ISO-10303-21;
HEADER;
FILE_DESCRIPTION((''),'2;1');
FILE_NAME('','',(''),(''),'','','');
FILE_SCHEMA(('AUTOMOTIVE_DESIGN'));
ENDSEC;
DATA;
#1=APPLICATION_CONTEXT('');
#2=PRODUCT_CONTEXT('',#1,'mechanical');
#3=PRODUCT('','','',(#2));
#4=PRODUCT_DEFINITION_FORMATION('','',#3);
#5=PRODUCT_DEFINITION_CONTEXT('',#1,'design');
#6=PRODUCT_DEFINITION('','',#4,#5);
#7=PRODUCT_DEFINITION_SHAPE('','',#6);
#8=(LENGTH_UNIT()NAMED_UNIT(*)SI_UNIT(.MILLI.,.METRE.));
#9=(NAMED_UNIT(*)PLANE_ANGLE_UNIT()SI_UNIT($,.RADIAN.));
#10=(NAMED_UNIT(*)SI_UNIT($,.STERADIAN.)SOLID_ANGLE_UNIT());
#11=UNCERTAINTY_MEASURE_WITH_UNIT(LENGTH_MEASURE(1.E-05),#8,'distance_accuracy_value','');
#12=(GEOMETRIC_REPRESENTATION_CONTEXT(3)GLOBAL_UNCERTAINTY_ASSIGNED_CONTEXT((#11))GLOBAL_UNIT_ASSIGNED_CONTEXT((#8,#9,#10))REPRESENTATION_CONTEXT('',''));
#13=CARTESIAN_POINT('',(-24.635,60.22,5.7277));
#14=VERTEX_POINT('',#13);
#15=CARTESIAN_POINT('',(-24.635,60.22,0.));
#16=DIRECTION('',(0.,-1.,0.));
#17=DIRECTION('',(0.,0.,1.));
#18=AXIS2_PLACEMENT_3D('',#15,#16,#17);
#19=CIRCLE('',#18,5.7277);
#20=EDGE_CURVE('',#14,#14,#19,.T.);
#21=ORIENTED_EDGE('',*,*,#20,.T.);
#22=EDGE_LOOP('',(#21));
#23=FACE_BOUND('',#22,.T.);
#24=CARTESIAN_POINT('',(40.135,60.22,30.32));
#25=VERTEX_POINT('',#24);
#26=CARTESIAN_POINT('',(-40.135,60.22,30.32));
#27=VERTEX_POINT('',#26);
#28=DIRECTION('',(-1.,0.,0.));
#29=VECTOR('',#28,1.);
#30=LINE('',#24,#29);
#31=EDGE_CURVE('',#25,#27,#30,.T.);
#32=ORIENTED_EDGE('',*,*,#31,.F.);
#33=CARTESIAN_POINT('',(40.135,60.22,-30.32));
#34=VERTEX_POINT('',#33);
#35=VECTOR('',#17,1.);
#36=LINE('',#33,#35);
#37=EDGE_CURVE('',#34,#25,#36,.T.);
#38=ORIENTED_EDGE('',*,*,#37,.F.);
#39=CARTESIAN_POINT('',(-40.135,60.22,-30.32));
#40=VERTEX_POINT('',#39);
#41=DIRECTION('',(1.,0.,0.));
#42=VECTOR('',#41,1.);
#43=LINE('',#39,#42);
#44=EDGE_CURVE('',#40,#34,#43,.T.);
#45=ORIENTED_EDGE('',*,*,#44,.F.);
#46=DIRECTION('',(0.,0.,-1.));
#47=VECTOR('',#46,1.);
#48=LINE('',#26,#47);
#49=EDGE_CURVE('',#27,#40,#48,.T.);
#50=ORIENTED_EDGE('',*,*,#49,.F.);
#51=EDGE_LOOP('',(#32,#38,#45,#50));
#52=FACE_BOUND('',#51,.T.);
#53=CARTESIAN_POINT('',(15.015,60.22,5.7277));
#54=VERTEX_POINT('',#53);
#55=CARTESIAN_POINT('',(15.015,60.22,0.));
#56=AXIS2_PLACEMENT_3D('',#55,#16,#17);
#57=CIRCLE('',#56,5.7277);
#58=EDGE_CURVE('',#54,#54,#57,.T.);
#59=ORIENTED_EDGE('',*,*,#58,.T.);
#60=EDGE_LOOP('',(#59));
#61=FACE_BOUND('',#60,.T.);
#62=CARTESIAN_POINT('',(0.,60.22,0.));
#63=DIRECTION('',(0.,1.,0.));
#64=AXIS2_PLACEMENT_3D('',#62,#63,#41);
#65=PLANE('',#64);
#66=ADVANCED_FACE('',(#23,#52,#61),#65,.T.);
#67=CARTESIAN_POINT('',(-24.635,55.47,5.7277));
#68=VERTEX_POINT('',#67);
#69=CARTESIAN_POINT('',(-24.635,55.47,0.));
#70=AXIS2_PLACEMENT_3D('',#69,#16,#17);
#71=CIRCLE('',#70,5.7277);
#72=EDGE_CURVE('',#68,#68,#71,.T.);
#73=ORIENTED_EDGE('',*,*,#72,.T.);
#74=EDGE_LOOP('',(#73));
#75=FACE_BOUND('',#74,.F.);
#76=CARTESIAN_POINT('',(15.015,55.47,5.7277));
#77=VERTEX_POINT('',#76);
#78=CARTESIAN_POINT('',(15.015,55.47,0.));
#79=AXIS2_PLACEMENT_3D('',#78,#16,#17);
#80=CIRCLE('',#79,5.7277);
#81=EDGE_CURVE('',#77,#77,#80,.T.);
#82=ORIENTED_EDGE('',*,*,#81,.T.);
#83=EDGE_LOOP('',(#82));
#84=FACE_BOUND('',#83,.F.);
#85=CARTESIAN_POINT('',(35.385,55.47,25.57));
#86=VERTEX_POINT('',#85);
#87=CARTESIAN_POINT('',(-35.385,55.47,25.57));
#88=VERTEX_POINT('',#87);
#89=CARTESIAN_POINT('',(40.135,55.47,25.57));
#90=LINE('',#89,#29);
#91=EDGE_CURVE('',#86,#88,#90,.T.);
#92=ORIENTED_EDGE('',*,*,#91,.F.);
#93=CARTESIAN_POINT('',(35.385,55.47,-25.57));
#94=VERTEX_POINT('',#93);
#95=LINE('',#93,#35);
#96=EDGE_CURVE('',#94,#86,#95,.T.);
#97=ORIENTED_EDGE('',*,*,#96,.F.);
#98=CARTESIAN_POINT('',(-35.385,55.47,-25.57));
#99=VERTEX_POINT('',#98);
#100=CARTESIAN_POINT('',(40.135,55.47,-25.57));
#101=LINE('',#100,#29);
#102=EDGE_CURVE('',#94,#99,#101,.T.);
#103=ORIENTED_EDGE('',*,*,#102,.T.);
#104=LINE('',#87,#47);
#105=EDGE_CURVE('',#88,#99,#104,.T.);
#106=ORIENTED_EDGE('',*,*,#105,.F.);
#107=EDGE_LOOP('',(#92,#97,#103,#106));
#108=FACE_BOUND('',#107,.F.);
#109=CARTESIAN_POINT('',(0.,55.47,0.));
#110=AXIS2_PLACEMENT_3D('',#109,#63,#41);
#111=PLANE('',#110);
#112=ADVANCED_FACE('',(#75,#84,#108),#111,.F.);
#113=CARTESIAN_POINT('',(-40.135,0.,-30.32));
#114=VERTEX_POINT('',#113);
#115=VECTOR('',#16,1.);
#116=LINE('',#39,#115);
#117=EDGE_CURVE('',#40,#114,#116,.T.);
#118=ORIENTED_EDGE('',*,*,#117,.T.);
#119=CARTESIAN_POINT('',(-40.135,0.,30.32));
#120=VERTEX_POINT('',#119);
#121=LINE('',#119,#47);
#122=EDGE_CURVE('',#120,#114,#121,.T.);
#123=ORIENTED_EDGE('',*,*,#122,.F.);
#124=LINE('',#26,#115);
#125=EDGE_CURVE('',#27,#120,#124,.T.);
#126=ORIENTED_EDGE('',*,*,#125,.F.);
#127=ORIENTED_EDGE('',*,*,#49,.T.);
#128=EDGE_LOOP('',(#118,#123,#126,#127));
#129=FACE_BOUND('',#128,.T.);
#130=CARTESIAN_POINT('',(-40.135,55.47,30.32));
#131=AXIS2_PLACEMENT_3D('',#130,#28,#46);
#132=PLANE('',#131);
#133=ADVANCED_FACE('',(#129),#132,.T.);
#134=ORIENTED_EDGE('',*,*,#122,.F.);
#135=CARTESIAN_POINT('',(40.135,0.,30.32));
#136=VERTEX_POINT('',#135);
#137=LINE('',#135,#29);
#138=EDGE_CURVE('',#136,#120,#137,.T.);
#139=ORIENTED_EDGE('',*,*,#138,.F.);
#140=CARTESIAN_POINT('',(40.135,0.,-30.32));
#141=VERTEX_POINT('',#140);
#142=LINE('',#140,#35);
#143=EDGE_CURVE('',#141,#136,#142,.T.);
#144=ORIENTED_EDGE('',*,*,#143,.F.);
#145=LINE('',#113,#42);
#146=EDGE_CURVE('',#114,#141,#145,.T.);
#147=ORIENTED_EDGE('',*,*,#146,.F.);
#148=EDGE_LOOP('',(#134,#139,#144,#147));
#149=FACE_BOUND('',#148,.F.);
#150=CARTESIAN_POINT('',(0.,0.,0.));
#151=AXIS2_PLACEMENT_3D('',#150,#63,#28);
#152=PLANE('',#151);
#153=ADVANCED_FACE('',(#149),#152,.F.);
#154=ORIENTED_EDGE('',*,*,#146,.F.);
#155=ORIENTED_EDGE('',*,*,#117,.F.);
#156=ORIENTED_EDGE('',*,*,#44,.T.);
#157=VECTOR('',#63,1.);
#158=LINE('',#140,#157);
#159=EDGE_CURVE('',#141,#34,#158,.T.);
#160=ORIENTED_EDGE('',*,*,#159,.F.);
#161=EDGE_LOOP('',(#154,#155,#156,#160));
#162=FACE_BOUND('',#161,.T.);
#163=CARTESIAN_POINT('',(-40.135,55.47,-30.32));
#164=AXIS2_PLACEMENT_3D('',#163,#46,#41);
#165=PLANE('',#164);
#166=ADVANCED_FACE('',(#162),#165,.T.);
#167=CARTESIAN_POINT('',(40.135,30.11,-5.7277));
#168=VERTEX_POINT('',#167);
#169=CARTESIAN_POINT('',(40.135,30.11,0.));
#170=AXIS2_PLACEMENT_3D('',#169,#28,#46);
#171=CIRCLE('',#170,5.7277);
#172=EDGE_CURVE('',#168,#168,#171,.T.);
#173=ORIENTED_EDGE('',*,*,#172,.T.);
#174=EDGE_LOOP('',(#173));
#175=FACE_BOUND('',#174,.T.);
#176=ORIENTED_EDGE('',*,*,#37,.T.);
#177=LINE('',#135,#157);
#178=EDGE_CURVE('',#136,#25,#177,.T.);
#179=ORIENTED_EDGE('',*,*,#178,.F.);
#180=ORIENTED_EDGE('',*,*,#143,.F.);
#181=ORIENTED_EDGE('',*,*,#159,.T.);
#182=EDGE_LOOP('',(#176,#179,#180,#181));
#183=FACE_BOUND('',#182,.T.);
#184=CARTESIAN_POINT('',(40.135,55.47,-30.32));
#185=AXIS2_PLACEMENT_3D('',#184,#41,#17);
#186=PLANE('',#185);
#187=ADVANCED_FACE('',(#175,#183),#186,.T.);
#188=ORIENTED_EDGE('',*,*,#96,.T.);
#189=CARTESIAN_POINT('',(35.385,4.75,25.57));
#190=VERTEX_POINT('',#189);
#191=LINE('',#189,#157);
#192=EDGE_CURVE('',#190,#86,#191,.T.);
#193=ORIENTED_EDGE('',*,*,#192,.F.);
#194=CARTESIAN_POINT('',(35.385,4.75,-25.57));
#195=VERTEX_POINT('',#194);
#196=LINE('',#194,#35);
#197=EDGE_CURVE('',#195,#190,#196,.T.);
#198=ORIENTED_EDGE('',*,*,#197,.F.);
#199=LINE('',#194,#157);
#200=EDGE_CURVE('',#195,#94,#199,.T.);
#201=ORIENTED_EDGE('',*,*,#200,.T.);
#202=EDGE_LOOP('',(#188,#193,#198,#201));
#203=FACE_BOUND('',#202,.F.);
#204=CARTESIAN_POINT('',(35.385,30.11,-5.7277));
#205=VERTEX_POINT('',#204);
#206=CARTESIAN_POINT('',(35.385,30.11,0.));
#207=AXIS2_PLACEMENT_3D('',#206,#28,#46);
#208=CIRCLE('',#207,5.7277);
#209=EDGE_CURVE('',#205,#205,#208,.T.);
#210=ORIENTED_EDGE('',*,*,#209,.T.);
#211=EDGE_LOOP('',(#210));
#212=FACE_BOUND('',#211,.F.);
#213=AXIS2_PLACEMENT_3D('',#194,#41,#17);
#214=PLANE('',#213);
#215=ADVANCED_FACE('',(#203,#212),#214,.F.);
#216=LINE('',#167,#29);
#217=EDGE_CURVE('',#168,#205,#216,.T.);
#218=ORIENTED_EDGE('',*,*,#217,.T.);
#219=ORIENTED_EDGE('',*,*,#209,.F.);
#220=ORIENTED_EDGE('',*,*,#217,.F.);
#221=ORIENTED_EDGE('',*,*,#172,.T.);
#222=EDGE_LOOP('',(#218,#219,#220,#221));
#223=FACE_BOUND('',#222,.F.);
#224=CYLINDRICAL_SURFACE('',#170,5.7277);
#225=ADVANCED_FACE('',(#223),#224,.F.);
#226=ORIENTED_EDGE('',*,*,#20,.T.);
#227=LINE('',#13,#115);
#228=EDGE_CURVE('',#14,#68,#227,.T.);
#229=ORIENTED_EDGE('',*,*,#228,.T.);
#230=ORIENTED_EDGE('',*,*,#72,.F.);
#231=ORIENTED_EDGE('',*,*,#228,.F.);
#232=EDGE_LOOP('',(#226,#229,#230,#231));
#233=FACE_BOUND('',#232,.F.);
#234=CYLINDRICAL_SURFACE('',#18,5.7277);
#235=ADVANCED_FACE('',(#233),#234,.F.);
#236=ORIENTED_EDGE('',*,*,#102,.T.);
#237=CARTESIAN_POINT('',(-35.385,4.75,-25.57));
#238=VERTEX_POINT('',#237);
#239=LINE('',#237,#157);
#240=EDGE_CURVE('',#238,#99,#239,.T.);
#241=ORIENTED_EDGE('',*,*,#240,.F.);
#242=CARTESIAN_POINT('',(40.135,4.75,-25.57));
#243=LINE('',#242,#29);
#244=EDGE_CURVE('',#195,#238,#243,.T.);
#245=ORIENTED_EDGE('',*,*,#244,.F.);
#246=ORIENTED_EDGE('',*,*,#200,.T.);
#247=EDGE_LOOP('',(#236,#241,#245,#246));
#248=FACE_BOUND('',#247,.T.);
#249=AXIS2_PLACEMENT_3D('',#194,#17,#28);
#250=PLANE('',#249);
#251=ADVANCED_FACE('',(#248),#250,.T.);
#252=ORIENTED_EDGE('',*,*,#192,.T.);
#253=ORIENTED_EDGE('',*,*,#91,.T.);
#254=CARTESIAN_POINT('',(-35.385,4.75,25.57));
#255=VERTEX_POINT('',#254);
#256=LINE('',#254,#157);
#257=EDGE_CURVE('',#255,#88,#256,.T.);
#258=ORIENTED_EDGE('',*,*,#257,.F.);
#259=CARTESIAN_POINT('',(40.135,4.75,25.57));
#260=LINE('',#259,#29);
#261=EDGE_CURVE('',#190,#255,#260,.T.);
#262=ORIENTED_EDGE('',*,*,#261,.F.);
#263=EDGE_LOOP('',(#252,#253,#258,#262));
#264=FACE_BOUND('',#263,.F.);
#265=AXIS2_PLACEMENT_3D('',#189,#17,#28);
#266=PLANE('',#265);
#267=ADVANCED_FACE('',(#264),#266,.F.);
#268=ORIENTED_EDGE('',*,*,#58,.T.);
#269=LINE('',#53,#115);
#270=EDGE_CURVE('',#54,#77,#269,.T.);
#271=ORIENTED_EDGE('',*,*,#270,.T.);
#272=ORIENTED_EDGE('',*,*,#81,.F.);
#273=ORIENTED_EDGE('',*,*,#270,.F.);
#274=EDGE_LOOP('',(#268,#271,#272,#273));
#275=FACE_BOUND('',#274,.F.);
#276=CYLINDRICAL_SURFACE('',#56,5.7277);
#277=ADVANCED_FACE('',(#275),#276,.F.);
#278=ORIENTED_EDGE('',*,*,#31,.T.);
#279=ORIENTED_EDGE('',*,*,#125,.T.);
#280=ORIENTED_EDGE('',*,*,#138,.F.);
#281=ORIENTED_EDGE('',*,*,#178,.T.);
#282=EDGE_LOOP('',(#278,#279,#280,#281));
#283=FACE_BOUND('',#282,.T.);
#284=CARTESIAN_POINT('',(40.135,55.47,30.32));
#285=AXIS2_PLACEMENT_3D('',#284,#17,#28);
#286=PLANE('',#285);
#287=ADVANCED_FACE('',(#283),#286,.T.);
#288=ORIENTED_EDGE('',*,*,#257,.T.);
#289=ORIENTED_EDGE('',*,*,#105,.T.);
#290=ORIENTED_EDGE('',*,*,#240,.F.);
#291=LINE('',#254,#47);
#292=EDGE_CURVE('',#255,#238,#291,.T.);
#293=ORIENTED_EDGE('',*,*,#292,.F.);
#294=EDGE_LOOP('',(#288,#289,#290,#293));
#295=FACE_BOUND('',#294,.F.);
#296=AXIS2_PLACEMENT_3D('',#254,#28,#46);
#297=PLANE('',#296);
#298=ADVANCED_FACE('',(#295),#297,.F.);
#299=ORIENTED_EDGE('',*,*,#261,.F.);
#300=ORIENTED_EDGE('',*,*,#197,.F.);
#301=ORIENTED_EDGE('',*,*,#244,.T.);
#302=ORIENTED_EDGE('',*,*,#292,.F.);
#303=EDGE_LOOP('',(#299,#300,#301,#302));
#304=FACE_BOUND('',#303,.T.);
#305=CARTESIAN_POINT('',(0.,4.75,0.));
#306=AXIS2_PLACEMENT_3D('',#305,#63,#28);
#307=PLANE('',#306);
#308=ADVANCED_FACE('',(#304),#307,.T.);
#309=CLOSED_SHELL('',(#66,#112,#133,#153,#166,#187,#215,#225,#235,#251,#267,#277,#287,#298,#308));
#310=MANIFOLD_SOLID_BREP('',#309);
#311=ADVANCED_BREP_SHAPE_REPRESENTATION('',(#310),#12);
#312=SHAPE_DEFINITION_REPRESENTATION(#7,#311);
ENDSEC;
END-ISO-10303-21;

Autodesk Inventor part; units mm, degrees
ref_plane "YZ Plane" through (0, 0, 0) normal (1, 0, 0) x (0, 1, 0)
ref_plane "XZ Plane" through (0, 0, 0) normal (0, 1, 0) x (-1, 0, 0)
ref_plane "XY Plane" through (0, 0, 0) normal (0, 0, 1) x (1, 0, 0)
sketch "Sketch1" plane through (0, 0, 0) normal (0, 1, 0) x (-1, 0, 0)
  line L0 (-40.135, 30.32) -> (40.135, 30.32)
  line L1 (40.135, 30.32) -> (40.135, -30.32)
  line L2 (40.135, -30.32) -> (-40.135, -30.32)
  line L3 (-40.135, -30.32) -> (-40.135, 30.32)
  line L4 (-40.135, 30.32) -> (40.135, -30.32) construction
  line L5 (40.135, 30.32) -> (-40.135, -30.32) construction
  point P0 (0, 0)
  dimension "d0" = 80.27
  dimension "d1" = 60.64
extrude "Extrusion1" add sketch "Sketch1" along normal blind 4.75
sketch "Sketch2" plane through (0, 4.75, 0) normal (0, 1, 0) x (1, 0, 0)
  line L0 (-40.135, -30.32) -> (40.135, -30.32) projected
  line L1 (40.135, -30.32) -> (40.135, 30.32) projected
  line L2 (-40.135, -30.32) -> (40.135, -30.32)
  line L3 (40.135, -30.32) -> (40.135, -25.57)
  line L4 (40.135, -25.57) -> (-40.135, -25.57)
  line L5 (-40.135, -25.57) -> (-40.135, -30.32)
  line L6 (-40.135, 30.32) -> (40.135, 30.32)
  line L7 (40.135, 30.32) -> (40.135, 25.57)
  line L8 (40.135, 25.57) -> (-40.135, 25.57)
  line L9 (-40.135, 25.57) -> (-40.135, 30.32)
  line L10 (-40.135, -25.57) -> (-35.385, -25.57)
  line L11 (-35.385, -25.57) -> (-35.385, 25.57)
  line L12 (-35.385, 25.57) -> (-40.135, 25.57)
  line L13 (-40.135, 25.57) -> (-40.135, -25.57)
  line L14 (40.135, 25.57) -> (35.385, 25.57)
  line L15 (35.385, 25.57) -> (35.385, -25.57)
  line L16 (35.385, -25.57) -> (40.135, -25.57)
  line L17 (40.135, -25.57) -> (40.135, 25.57)
  point P0 (0, 0)
  dimension "d4" = 4.75
  dimension "d5" = 4.75
  dimension "d6" = 4.75
  dimension "d7" = 4.75
extrude "Extrusion2" add sketch "Sketch2" along normal blind 50.72 contours L5 L4 L1 L0 | L13 L8 L11 L4 | L4 L15 L8 L1 | L9 L6 L1 L8
sketch "Sketch3" plane through (0, 55.47, 0) normal (0, 1, 0) x (1, 0, 0)
  line L0 (40.135, -30.32) -> (-40.135, -30.32) projected
  line L1 (-40.135, -30.32) -> (-40.135, 30.32) projected
  line L2 (-40.135, 30.32) -> (40.135, 30.32) projected
  line L3 (40.135, 30.32) -> (40.135, -30.32) projected
  point P0 (0, 0)
extrude "Extrusion3" add sketch "Sketch3" along normal blind 4.75
sketch "Sketch4" plane through (40.135, 0, 30.32) normal (1, 0, 0) x (0, 0, -1)
  line L0 (0, 60.22) -> (60.64, 60.22) projected
  line L1 (0, 0) -> (0, 60.22) projected
  line L2 (60.64, 0) -> (60.64, 60.22) projected
  line L3 (60.64, 0) -> (0, 0) projected
  point P0 (30.32, 0)
  point P1 (30.32, 30.11)
hole "Hole1" at (40.135, 30.11, 0) direction (-1, 0, 0) diameter 11.4554 end up to surface
sketch "Sketch5" plane through (0, 60.22, 0) normal (0, 1, 0) x (1, 0, 0)
  line L0 (-40.135, -30.32) -> (40.135, -30.32) projected
  line L1 (40.135, -30.32) -> (40.135, 30.32) projected
  line L2 (40.135, 30.32) -> (-40.135, 30.32) projected
  line L3 (-40.135, 30.32) -> (-40.135, -30.32) projected
  point P0 (0, 0)
  point P1 (-24.635, 0)
  point P2 (15.015, 0)
  dimension "d19" = 15.5
  dimension "d20" = 25.12
hole "Hole2" at (-24.635, 60.22, 0) at (15.015, 60.22, 0) direction (0, -1, 0) diameter 11.4554 end up to surface
properties part number "Reservoir" material "PMMA Plastic"
